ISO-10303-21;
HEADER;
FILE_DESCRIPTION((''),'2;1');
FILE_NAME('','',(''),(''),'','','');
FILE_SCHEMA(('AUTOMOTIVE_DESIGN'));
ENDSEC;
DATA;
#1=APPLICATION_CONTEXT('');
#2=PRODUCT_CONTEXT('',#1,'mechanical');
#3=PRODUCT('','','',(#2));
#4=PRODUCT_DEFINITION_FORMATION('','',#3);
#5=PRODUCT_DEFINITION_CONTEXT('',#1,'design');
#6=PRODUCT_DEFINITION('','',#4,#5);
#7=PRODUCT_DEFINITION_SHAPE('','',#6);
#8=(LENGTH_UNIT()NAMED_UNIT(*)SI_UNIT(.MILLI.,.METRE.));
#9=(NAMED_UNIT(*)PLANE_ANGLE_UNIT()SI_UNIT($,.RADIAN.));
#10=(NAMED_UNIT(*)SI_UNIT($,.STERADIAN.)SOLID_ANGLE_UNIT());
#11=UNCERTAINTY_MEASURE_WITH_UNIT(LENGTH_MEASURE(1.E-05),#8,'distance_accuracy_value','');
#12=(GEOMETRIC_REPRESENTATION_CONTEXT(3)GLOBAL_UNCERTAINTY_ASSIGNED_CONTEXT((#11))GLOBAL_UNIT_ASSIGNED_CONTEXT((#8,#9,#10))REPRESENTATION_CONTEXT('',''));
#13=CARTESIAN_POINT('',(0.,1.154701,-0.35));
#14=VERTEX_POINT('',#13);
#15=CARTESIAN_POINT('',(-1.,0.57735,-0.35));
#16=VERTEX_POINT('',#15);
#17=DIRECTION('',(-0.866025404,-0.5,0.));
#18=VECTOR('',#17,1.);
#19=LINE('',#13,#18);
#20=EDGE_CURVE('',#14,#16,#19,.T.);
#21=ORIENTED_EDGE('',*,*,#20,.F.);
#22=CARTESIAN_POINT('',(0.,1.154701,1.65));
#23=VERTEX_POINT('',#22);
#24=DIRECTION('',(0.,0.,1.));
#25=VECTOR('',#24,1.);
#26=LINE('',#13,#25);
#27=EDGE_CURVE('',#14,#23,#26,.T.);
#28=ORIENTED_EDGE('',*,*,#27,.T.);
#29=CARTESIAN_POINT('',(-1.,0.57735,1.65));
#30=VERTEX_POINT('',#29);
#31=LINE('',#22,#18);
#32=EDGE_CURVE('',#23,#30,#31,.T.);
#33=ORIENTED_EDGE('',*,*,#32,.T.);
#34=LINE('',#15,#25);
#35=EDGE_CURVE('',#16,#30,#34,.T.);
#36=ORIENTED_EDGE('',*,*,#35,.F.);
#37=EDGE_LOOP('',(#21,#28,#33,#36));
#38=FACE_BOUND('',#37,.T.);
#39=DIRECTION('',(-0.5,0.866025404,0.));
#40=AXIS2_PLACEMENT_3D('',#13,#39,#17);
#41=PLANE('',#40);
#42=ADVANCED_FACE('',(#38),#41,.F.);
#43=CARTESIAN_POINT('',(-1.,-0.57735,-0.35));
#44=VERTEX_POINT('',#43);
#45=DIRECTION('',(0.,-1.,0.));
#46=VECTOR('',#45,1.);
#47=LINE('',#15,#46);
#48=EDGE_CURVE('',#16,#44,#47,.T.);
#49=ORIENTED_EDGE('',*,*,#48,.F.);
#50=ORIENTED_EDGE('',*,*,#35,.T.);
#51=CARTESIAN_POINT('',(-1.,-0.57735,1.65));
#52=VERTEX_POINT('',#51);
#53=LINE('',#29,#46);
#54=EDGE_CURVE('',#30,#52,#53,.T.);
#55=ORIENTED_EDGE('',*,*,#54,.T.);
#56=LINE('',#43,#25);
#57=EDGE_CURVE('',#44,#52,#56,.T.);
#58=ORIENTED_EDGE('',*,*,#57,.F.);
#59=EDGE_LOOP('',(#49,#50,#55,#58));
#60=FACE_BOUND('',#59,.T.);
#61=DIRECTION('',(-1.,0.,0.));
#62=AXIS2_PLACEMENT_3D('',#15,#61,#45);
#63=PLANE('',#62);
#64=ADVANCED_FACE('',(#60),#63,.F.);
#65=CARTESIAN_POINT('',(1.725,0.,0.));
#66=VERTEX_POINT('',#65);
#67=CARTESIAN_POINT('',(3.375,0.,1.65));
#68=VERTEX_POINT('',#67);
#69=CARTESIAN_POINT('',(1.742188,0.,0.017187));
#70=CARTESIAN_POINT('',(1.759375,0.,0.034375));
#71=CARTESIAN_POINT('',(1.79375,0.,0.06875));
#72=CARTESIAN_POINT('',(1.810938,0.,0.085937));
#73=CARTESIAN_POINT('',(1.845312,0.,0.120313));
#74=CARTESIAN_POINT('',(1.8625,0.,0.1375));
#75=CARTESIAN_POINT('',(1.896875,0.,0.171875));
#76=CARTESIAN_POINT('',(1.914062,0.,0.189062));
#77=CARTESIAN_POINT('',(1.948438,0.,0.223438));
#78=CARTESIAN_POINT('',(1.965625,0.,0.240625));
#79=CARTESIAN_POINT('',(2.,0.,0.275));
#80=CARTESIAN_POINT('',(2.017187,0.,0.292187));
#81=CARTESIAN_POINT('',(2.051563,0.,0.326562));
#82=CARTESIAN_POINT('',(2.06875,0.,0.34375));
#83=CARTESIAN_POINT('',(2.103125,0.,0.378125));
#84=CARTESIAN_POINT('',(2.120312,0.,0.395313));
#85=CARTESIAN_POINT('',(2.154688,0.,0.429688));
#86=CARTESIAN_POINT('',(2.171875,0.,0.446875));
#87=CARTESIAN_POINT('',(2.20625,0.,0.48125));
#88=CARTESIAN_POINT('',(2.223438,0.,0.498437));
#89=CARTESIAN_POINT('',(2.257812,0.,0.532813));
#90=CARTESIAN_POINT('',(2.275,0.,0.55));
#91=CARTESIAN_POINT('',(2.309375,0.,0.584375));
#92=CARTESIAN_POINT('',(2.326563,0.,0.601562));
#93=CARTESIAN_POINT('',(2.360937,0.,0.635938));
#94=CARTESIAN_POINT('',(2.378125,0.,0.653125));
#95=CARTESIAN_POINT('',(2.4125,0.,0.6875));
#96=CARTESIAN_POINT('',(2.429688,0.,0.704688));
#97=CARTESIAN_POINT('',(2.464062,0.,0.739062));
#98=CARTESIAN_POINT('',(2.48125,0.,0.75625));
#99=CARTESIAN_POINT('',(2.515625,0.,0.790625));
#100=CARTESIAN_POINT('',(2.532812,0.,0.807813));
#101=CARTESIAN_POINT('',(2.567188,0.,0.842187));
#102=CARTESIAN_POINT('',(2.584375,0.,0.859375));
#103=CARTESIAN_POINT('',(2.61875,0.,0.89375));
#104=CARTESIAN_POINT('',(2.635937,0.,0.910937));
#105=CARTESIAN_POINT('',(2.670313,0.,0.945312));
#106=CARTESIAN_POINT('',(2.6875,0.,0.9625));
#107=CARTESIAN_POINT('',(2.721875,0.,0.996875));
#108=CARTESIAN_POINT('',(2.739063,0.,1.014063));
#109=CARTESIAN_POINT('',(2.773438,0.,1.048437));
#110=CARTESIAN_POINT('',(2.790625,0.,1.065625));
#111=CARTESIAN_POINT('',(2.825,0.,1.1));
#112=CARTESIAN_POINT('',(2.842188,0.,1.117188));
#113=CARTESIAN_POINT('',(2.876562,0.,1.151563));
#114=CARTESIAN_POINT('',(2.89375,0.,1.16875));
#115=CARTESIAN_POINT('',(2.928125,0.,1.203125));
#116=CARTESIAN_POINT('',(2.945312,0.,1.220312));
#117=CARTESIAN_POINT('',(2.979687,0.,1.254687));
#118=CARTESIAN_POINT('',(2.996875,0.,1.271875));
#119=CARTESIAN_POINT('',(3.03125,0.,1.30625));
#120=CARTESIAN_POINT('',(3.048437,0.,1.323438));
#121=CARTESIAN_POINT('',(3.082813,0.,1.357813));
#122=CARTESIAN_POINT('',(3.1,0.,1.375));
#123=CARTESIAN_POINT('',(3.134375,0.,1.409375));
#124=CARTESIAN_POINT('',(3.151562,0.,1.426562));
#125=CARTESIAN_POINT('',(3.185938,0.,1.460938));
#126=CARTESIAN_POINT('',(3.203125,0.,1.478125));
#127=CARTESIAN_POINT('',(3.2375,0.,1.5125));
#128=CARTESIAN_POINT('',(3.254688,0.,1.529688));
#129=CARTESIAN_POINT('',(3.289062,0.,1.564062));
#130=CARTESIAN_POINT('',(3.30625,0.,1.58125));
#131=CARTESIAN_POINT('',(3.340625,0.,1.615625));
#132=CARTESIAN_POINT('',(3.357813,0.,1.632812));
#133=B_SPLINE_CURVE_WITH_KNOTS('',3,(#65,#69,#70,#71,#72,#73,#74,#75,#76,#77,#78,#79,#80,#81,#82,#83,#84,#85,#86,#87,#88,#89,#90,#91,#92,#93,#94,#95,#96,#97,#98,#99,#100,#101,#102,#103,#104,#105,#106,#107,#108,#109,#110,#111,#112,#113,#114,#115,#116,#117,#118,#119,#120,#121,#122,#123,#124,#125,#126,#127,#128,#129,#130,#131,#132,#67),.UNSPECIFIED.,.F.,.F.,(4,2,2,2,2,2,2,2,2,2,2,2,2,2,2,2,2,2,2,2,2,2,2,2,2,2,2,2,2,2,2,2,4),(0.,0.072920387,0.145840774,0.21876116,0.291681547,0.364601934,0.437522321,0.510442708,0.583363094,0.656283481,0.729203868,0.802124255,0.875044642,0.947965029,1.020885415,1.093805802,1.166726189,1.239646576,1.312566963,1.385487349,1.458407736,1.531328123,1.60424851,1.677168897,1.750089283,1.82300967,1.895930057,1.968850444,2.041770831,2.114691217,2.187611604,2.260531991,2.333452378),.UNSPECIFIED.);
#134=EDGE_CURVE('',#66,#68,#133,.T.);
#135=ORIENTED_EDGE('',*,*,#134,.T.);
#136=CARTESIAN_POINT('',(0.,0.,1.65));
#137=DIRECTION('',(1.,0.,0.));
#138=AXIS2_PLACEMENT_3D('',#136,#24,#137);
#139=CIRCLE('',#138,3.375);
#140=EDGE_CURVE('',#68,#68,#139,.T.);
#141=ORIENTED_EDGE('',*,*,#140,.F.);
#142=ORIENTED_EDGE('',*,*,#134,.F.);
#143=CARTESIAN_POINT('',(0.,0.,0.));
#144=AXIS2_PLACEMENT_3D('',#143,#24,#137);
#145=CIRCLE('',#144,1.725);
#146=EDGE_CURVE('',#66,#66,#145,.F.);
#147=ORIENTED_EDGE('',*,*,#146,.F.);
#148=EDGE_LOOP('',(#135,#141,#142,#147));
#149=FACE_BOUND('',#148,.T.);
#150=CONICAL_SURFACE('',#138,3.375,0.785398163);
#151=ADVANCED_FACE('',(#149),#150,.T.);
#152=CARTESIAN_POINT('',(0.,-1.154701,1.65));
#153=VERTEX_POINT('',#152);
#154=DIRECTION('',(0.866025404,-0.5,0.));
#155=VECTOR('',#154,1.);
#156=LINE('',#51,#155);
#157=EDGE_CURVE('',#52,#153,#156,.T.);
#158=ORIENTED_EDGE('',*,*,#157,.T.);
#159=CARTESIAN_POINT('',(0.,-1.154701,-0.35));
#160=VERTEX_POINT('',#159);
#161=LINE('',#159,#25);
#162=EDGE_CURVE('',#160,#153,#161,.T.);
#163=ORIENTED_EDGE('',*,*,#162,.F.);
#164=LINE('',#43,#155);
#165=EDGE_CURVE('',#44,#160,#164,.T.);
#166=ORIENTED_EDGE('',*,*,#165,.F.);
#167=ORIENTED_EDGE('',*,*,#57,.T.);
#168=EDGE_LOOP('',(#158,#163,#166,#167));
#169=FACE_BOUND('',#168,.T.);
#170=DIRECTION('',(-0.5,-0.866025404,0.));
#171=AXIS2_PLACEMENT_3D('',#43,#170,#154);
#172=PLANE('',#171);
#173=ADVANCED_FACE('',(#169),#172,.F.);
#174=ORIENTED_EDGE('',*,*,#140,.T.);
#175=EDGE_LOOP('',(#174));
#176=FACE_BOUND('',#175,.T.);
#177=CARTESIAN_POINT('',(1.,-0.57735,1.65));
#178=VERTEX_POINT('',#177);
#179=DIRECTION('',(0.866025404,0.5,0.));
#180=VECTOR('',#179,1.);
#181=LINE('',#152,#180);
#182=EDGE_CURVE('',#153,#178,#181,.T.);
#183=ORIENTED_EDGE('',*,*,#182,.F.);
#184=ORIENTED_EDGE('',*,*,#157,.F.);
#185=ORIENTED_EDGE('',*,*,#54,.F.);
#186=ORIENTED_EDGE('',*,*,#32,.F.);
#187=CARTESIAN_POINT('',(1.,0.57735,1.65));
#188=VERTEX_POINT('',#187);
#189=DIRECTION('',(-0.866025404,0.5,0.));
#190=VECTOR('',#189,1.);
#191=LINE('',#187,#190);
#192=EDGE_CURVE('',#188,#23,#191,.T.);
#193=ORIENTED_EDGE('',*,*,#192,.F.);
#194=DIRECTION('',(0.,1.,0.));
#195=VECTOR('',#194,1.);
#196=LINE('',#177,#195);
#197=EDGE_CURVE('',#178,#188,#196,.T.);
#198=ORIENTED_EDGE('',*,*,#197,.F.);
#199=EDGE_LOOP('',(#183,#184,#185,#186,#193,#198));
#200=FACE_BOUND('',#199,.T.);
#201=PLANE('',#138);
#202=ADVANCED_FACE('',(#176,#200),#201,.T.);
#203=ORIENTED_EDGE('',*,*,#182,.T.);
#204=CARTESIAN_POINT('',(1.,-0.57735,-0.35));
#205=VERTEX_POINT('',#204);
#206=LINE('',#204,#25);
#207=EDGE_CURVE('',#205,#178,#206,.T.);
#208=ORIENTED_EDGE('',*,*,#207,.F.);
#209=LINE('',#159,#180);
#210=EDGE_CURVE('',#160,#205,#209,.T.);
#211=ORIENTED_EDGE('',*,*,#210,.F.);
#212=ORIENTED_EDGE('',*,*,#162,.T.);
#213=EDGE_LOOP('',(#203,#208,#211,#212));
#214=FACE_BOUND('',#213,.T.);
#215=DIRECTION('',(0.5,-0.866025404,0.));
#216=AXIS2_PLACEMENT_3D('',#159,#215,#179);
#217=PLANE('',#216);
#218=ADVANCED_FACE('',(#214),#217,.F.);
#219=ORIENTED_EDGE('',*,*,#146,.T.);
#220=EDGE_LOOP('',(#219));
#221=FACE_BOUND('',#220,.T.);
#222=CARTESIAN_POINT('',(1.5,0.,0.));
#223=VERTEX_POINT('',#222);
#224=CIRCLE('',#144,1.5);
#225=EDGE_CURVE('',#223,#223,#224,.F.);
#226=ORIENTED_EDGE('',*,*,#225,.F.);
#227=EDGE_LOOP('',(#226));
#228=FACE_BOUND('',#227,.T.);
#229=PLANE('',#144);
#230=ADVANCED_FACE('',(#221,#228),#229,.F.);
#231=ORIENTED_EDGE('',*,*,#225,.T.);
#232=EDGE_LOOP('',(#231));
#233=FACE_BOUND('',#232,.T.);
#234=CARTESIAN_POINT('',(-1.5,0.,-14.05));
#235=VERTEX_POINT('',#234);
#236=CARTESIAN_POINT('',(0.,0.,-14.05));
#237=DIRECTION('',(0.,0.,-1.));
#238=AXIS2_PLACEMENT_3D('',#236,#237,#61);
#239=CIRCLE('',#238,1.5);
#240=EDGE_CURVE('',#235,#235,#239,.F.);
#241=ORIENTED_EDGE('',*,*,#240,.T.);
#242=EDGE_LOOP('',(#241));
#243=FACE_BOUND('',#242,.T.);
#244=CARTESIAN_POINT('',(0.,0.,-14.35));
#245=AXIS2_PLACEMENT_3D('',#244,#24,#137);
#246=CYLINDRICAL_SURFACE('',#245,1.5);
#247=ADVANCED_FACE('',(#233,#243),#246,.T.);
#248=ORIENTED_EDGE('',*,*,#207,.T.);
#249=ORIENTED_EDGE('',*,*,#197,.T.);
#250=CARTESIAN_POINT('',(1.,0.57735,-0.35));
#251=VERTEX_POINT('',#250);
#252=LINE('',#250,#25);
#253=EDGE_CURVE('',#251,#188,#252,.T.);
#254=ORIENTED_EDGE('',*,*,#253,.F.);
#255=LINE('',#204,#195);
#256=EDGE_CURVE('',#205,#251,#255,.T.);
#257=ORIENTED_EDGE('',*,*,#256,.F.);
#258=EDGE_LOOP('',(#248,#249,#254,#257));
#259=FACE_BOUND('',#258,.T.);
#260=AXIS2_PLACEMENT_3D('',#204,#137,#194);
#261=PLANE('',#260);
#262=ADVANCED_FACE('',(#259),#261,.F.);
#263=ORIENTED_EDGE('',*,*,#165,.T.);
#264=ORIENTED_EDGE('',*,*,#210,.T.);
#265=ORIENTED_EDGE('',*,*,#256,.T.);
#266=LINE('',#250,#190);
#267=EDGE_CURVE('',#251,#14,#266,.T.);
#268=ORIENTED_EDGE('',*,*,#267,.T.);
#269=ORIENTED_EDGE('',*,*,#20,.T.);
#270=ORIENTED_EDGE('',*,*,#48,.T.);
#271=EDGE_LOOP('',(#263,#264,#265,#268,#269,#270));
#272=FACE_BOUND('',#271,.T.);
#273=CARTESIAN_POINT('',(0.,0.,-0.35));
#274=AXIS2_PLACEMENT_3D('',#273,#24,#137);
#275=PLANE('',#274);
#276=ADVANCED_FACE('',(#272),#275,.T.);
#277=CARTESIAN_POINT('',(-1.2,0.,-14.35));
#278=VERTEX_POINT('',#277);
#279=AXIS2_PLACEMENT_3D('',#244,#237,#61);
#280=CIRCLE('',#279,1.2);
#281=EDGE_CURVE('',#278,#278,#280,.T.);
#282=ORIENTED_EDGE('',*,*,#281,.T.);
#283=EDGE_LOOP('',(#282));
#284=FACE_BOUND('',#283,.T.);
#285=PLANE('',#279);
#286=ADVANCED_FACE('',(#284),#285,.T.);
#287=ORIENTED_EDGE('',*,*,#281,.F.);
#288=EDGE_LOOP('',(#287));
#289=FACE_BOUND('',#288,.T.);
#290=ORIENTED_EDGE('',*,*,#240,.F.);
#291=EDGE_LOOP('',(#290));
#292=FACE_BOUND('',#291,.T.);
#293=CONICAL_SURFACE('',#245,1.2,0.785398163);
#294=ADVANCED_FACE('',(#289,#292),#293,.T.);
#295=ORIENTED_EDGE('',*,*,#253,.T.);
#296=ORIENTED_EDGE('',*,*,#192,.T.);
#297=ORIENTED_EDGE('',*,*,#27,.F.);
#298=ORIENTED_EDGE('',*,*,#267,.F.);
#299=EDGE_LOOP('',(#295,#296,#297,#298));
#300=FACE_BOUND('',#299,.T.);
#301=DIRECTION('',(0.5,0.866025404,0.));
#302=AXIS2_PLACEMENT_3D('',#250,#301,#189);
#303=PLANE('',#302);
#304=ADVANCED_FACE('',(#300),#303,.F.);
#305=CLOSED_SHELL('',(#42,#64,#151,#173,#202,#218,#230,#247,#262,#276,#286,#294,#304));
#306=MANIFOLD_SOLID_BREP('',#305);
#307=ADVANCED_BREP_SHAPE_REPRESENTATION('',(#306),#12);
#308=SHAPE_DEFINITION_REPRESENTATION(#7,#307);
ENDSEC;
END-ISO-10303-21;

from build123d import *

# Parameters (mm, degrees)
SKETCH1_R           = 3.375
BOSS_EXTRUDE1_DEPTH = 1.65
SKETCH2_R           = 1.5
BOSS_EXTRUDE2_DEPTH = 14.35
CHAMFER1_SIZE       = 0.3
CUT_EXTRUDE1_DEPTH  = 2
CHAMFER2_SIZE       = 1.65


with BuildPart() as part:
    # Sketch1 → Boss-Extrude1 (new body)
    with BuildSketch(Plane.XY):
        Circle(SKETCH1_R)
    extrude(amount=BOSS_EXTRUDE1_DEPTH)

    # Sketch2 → Boss-Extrude2 (add)
    with BuildSketch(Plane(origin=(0, 0, 0), x_dir=(-1, 0, 0), z_dir=(0, 0, -1))):
        with Locations(Location((0, 0, 0), (0, 0, 180))):
            Circle(SKETCH2_R)
    extrude(amount=BOSS_EXTRUDE2_DEPTH)

    # Chamfer1
    chamfer1_edges = [part.edges().sort_by_distance(p)[0] for p in [
        (-1.5, 0, -14.35),
    ]]
    chamfer(chamfer1_edges, length=CHAMFER1_SIZE)

    # Sketch3 → Cut-Extrude1 (cut)
    with BuildSketch(Plane.XY.offset(1.65)):
        Polygon((0, 1.154700538), (-1, 0.577350269), (-1, -0.577350269), (0, -1.154700538), (1, -0.577350269), (1, 0.577350269), align=None)
    extrude(amount=-CUT_EXTRUDE1_DEPTH, mode=Mode.SUBTRACT)

    # Chamfer2
    chamfer2_edges = [part.edges().sort_by_distance(p)[0] for p in [
        (-3.375, 0, 0),
    ]]
    chamfer(chamfer2_edges, length=CHAMFER2_SIZE - 0.0001)  # a hair under: the kernel refuses the full size


solid = part.part
